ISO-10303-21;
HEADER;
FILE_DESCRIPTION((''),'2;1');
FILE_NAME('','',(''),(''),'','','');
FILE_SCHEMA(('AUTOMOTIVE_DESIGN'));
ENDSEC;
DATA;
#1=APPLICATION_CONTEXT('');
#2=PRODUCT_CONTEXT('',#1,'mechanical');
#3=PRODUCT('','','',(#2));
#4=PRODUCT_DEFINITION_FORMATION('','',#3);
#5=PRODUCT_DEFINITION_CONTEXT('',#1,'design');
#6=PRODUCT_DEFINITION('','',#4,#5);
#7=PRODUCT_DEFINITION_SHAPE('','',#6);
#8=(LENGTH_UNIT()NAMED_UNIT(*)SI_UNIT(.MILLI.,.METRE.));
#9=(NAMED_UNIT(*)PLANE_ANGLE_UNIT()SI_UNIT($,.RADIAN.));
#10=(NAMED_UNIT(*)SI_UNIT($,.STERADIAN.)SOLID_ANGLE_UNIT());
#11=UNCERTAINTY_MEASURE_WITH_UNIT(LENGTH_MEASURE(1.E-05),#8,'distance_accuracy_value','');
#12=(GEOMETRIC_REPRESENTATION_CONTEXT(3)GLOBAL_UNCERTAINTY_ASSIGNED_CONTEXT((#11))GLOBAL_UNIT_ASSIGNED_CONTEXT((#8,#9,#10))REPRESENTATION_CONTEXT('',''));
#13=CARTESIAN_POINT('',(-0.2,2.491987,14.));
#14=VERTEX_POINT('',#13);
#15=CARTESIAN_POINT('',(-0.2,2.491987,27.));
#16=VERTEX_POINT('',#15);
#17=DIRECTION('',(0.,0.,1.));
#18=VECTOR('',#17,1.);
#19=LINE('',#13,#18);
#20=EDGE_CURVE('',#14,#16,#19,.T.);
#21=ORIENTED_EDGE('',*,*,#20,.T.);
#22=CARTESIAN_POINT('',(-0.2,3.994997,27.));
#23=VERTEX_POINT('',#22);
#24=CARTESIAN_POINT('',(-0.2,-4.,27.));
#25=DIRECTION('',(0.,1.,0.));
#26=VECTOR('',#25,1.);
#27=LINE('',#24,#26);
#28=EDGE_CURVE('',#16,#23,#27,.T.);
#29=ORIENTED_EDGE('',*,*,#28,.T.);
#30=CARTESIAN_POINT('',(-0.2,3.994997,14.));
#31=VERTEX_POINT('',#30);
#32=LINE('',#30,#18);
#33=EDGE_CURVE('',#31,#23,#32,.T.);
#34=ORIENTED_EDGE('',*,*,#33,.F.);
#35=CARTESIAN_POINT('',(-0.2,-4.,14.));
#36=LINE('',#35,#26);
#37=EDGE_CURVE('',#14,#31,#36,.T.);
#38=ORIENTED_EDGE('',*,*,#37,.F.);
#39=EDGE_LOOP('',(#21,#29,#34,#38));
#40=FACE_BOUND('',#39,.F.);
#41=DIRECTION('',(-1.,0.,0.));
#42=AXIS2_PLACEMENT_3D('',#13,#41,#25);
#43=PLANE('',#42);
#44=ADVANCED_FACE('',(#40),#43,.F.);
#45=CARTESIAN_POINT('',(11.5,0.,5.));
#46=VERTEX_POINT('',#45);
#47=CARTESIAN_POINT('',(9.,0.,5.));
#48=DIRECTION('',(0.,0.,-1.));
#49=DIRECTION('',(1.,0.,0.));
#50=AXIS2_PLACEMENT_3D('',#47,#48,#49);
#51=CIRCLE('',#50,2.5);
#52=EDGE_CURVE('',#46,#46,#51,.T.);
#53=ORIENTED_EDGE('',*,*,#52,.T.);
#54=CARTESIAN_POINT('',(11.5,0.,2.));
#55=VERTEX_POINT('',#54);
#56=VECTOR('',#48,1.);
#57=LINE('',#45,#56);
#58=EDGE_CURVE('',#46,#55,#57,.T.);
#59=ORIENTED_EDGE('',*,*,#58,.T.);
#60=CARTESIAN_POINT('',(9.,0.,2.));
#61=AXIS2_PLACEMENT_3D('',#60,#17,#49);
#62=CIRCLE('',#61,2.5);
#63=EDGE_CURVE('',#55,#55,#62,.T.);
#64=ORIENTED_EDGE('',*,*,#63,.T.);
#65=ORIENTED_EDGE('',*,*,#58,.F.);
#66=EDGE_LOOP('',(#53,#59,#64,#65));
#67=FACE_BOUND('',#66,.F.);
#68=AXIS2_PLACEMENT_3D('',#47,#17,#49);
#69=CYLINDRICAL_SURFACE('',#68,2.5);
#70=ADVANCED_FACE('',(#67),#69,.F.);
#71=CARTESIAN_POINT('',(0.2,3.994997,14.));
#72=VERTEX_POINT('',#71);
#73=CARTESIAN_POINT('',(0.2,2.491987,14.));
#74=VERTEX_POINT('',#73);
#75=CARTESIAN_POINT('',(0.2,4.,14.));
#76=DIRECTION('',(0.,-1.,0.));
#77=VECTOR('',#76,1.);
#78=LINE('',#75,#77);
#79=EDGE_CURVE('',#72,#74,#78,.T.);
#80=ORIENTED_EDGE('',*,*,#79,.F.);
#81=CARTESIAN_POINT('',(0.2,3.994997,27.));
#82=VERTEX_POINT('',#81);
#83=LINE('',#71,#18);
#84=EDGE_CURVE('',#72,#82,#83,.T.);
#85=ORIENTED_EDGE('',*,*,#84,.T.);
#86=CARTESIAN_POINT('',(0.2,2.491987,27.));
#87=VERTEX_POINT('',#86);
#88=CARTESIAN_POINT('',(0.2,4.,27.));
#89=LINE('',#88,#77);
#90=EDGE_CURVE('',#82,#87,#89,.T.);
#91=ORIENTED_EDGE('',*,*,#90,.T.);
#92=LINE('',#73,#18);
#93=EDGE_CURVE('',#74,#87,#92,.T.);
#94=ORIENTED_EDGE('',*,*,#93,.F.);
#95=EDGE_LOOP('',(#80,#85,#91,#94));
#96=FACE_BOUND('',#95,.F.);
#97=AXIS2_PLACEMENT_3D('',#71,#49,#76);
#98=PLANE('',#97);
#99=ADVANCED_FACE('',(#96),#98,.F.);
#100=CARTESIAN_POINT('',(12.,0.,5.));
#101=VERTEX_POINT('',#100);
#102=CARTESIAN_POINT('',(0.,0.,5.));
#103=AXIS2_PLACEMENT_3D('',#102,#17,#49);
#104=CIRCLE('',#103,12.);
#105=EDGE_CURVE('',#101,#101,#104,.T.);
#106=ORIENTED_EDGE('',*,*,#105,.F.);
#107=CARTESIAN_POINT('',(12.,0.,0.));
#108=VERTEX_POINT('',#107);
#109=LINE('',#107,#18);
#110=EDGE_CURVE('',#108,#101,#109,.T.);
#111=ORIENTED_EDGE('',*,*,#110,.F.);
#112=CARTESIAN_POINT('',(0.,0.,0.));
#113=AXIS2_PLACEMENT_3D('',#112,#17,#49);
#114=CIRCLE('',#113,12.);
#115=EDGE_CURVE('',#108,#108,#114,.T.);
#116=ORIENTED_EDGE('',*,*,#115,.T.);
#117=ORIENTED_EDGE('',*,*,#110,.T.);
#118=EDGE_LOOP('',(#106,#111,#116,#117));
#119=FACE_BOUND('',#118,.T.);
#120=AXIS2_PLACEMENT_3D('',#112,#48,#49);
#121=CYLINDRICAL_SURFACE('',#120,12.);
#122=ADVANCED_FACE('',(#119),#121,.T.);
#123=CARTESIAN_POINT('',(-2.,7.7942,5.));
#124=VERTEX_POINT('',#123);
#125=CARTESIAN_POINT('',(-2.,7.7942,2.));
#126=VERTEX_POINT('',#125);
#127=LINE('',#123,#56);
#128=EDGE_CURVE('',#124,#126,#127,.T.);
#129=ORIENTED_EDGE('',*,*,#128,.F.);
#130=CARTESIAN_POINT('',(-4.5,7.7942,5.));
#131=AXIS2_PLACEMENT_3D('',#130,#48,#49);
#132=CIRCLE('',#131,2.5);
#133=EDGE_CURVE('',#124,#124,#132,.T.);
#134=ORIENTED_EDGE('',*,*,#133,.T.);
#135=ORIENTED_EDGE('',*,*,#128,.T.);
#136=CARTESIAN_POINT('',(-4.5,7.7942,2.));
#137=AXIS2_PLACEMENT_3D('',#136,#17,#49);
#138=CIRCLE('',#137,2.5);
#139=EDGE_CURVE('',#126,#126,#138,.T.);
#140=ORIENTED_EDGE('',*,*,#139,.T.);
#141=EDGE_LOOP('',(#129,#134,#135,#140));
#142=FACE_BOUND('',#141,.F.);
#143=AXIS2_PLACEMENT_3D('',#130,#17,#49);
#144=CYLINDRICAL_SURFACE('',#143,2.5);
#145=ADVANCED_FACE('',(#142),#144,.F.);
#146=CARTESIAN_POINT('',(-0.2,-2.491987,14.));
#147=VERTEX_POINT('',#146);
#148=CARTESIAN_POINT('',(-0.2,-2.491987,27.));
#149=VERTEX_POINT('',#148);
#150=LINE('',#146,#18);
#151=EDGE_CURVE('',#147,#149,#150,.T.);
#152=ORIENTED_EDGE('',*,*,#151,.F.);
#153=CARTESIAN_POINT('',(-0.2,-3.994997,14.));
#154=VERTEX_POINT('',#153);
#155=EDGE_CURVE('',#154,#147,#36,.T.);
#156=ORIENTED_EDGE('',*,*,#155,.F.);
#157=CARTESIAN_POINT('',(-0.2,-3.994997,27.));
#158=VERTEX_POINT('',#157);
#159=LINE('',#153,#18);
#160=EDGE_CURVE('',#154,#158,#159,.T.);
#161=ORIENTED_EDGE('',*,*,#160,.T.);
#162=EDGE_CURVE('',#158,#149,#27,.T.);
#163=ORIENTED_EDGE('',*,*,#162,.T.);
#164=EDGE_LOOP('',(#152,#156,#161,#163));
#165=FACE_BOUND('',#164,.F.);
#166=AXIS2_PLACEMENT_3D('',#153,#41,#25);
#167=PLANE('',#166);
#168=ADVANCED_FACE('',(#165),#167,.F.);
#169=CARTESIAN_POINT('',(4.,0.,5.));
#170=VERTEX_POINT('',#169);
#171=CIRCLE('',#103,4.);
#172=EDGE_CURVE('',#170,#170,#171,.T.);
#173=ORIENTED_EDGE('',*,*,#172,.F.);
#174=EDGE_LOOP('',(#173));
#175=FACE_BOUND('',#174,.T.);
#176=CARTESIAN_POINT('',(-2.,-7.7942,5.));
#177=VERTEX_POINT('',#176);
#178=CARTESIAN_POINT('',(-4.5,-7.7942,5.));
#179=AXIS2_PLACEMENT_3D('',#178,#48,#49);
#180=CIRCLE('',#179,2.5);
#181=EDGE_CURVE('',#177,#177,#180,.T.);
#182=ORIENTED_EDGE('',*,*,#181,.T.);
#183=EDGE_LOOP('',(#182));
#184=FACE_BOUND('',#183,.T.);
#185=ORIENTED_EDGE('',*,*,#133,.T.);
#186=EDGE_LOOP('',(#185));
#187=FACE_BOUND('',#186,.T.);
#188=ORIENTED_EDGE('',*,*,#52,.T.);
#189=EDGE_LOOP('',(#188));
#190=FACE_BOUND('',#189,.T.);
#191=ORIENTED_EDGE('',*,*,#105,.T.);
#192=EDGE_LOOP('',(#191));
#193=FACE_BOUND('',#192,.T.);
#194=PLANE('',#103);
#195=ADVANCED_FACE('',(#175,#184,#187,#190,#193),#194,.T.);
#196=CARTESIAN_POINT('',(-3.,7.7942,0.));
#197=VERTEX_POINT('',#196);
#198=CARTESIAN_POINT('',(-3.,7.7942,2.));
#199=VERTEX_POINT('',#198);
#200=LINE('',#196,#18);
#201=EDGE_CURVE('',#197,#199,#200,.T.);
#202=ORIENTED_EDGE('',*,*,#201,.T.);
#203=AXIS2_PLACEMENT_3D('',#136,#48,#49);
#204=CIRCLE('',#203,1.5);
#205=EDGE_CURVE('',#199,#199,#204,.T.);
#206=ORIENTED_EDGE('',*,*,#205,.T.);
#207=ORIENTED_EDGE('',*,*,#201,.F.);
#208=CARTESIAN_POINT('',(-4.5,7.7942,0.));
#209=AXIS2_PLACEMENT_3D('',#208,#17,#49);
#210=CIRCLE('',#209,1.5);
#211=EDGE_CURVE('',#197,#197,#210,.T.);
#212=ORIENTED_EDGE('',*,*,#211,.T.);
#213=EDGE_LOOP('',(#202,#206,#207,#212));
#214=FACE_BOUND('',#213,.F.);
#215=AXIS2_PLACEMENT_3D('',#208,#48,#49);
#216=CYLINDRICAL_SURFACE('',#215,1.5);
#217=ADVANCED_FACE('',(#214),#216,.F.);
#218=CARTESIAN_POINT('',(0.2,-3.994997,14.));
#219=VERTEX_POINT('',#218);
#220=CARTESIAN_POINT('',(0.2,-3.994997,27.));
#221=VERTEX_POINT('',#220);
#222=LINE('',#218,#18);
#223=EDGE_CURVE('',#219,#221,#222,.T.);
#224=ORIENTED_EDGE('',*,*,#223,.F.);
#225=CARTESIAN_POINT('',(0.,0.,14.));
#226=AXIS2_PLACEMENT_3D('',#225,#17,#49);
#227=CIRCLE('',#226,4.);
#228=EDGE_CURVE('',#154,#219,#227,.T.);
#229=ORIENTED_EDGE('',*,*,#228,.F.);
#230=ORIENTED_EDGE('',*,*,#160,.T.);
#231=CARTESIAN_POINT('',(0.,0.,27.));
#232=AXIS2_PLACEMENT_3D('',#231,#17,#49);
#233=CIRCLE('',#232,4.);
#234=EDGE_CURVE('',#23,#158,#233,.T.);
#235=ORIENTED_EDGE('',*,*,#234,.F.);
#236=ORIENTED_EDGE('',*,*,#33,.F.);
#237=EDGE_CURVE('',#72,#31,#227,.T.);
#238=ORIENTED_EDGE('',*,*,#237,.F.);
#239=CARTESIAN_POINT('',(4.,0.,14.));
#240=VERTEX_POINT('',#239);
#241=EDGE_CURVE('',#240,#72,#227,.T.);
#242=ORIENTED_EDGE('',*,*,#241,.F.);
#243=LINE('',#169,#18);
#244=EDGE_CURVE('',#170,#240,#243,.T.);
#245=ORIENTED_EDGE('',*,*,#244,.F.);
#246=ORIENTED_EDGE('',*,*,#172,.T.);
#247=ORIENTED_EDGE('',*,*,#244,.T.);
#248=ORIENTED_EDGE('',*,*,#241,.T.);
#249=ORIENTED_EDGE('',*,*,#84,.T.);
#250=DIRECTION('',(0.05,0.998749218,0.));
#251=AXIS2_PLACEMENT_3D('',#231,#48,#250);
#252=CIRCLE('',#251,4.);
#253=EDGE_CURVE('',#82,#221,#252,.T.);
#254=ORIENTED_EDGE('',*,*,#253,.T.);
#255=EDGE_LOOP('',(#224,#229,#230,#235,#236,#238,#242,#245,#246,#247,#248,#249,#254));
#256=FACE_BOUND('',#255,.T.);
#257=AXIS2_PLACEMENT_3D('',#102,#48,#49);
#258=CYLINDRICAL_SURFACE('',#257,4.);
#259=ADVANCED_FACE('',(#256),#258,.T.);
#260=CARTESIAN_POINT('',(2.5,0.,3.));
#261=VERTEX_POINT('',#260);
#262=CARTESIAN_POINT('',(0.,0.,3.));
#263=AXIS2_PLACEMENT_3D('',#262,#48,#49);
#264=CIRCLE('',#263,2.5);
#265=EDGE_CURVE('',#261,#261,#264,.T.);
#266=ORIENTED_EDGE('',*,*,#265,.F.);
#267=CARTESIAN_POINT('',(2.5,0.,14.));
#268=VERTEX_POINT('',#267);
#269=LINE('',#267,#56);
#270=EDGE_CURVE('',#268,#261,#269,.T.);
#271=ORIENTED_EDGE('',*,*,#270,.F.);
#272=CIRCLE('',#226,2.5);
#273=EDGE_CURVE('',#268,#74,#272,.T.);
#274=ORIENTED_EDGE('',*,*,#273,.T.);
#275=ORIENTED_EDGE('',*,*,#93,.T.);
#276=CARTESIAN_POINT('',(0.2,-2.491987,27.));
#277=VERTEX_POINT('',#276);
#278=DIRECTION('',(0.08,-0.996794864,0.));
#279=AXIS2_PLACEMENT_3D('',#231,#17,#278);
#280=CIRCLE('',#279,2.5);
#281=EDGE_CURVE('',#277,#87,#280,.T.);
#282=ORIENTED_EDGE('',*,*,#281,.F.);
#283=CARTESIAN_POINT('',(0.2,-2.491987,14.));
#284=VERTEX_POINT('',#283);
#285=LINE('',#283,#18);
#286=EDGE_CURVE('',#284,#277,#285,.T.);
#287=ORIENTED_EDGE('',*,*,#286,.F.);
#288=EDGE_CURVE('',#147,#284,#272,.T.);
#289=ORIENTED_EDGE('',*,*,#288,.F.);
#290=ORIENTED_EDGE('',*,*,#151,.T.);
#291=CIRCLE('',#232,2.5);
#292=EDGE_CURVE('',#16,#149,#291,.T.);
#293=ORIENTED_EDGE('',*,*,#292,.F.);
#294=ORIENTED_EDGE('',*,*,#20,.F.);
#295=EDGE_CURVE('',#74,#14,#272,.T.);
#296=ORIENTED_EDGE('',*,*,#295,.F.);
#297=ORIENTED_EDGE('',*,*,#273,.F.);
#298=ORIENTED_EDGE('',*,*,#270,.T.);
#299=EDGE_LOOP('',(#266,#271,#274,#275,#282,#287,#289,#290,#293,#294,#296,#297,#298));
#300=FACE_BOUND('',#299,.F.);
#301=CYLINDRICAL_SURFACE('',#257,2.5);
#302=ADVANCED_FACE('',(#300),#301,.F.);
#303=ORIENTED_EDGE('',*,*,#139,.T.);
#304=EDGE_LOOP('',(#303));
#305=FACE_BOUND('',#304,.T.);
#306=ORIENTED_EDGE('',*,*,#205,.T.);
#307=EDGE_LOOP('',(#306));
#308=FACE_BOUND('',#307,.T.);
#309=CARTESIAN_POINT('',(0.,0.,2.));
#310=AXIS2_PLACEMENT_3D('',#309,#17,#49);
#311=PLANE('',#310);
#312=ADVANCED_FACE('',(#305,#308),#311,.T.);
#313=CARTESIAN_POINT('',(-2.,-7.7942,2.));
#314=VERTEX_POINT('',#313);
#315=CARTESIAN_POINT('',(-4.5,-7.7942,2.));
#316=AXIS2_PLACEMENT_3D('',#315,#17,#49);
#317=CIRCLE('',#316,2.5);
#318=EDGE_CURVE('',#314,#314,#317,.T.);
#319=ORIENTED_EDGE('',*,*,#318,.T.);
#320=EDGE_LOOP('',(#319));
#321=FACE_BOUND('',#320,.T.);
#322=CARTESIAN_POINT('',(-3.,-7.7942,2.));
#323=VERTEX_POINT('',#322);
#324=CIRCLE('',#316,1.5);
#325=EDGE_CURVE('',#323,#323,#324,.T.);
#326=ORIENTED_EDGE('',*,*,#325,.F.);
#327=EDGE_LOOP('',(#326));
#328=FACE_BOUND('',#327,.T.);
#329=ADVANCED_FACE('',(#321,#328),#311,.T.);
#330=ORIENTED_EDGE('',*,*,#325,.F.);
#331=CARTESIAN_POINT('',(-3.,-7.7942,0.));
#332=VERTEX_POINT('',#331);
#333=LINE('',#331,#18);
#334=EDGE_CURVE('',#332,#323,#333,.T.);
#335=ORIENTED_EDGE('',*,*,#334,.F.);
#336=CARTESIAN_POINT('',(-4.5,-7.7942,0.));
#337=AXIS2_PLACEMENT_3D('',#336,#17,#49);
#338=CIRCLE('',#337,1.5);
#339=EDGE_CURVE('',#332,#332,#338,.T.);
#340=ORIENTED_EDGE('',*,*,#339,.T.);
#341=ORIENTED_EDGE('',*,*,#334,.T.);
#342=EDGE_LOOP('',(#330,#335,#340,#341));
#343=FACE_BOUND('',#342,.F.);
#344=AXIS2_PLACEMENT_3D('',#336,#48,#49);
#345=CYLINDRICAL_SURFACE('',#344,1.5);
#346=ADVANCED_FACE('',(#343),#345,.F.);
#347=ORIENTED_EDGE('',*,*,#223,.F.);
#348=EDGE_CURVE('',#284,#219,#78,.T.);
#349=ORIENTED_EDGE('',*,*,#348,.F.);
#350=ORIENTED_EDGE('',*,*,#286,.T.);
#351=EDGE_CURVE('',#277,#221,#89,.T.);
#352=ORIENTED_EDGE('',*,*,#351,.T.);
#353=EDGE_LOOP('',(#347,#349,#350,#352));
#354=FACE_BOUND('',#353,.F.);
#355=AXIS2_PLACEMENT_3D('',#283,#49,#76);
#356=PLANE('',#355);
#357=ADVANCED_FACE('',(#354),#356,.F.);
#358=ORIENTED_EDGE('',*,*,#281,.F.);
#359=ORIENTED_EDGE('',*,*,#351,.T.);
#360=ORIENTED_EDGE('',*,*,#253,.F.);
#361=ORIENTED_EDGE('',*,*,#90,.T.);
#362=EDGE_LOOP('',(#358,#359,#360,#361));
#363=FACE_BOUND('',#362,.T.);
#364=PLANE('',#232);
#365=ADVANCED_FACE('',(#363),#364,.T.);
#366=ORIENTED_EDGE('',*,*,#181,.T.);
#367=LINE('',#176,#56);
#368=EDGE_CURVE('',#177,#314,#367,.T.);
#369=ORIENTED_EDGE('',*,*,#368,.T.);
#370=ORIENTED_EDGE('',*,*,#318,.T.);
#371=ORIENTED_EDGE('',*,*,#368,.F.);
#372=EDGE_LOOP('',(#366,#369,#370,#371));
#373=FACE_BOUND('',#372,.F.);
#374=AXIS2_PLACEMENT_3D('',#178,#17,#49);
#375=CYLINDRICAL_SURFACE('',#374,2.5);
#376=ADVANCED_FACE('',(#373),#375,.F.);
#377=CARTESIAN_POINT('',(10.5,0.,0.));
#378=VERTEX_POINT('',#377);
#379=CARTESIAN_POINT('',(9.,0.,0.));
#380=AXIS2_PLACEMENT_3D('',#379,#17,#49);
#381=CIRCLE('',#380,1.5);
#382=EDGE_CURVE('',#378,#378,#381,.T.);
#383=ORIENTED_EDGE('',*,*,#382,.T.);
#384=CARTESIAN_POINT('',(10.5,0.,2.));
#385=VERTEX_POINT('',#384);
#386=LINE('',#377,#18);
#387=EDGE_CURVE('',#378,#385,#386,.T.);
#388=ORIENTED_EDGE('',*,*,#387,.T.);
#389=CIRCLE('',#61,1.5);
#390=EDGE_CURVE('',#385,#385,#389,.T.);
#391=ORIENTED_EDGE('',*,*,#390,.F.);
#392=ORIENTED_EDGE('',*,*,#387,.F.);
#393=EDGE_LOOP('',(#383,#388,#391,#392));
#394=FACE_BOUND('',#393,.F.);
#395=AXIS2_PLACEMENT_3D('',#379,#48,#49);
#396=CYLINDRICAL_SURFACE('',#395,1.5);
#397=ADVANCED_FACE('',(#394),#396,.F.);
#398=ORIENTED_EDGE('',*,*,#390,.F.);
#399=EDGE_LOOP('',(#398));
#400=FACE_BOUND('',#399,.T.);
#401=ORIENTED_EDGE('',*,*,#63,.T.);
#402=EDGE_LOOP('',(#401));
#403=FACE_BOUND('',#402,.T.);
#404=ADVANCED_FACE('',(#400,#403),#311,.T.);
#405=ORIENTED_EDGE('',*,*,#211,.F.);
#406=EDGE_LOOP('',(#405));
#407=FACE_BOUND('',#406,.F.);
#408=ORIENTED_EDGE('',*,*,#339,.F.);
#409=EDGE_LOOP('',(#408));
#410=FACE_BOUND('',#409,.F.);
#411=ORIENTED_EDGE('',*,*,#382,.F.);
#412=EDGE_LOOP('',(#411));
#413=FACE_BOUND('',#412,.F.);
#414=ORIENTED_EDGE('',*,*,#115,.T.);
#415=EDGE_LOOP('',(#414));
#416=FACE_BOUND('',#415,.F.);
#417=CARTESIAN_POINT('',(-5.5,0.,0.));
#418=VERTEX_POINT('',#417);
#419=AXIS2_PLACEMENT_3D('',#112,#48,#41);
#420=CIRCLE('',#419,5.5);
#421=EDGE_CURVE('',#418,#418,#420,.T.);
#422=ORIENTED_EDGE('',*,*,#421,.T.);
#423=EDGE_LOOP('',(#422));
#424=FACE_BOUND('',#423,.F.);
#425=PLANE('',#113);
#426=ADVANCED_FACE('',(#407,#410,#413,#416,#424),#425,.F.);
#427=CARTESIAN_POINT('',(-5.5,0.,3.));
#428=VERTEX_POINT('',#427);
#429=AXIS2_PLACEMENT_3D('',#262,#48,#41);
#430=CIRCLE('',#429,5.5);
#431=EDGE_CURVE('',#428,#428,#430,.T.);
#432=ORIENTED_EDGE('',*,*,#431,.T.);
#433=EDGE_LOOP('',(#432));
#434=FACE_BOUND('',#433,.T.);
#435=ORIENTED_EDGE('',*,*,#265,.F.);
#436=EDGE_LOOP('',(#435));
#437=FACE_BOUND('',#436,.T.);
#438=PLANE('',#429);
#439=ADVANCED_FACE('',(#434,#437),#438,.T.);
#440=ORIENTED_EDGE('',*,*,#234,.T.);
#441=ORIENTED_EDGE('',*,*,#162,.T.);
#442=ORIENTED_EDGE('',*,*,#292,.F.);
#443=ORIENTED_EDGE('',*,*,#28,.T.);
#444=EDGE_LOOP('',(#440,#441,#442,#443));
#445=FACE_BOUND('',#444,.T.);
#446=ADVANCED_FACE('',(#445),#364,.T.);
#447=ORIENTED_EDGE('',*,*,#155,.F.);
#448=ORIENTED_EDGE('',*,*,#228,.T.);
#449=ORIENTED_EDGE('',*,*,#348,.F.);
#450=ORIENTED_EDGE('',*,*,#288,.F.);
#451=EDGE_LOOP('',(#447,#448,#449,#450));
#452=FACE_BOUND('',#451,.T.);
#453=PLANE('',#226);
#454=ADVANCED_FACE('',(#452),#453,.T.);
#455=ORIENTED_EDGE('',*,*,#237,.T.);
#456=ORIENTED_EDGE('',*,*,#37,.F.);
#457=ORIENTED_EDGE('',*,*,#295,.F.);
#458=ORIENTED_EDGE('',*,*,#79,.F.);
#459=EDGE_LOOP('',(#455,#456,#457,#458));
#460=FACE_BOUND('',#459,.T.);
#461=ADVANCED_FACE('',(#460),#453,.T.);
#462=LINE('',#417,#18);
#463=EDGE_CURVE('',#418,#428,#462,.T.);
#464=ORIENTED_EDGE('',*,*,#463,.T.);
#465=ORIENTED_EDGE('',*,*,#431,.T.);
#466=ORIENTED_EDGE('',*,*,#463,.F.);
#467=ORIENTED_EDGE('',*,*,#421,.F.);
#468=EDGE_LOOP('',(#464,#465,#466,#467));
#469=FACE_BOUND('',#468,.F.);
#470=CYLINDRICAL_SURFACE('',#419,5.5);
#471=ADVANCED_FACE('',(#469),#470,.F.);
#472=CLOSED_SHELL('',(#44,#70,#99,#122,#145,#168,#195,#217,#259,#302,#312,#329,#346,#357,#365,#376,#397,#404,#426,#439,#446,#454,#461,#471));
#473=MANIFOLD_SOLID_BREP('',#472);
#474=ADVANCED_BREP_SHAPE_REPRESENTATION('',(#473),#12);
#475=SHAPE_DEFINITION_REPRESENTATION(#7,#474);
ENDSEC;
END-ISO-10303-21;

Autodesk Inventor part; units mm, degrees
ref_plane "YZ Plane" through (0, 0, 0) normal (1, 0, 0) x (0, 1, 0)
ref_plane "XZ Plane" through (0, 0, 0) normal (0, 1, 0) x (-1, 0, 0)
ref_plane "XY Plane" through (0, 0, 0) normal (0, 0, 1) x (1, 0, 0)
sketch "Sketch1" plane through (0, 0, 0) normal (0, 0, 1) x (1, 0, 0)
  circle A0 centre (0, 0) radius 12
  circle A1 centre (0, 0) radius 9 construction
  circle A2 centre (9, 0) radius 1.5
  circle A3 centre (-4.5, -7.7942) radius 1.5
  circle A4 centre (-4.5, 7.7942) radius 1.5
  line L0 (9, 0) -> (-4.5, -7.7942) construction
  line L1 (-4.5, 7.7942) -> (-4.5, -7.7942) construction
  line L2 (9, 0) -> (-4.5, 7.7942) construction
  circle A5 centre (0, 0) radius 2.5
  dimension "d0" = 24
  dimension "d1" = 18
  dimension "d2" = 3
  dimension "d3" = 5
extrude "Extrusion1" add sketch "Sketch1" along normal blind 5
sketch "Sketch2" plane through (0, 0, 5) normal (0, 0, 1) x (1, 0, 0)
  circle A0 centre (9, 0) radius 2.5
  circle A1 centre (-4.5, 7.7942) radius 2.5
  circle A2 centre (-4.5, -7.7942) radius 2.5
  circle A3 centre (9, 0) radius 1.5 projected
  circle A4 centre (-4.5, -7.7942) radius 1.5 projected
  circle A5 centre (-4.5, 7.7942) radius 1.5 projected
  circle A6 centre (0, 0) radius 4
  circle A7 centre (0, 0) radius 2.5 projected
  circle A8 centre (0, 0) radius 6.5
  dimension "d6" = 5
  dimension "d7" = 8
  dimension "d12" = 13
extrude "Extrusion2" cut sketch "Sketch2" against normal blind 3 contours A0 | A2 | A1 | A5
extrude "Extrusion3" add sketch "Sketch2" along normal blind 9 contours A6
sketch "Sketch3" plane through (0, 0, 0) normal (0, 0, -1) x (-1, 0, 0)
  circle A0 centre (0, 0) radius 12 projected
  circle A1 centre (0, 0) radius 5.5
  dimension "d13" = 11
extrude "Extrusion4" cut sketch "Sketch3" against normal blind 3 contours A1
sketch "Sketch4" plane through (0, 0, 14) normal (0, 0, 1) x (1, 0, 0)
  circle A0 centre (0, 0) radius 4 projected
  circle A1 centre (0, 0) radius 2.5 projected
  line L0 (-0.2, -4) -> (-0.2, 4)
  line L1 (-0.2, 4) -> (0.2, 4)
  line L2 (0.2, 4) -> (0.2, -4)
  line L3 (0.2, -4) -> (-0.2, -4)
  point P0 (0, -4)
  point P1 (0, 4)
  point P2 (0.2, -2.492)
  point P3 (0.2, -3.995)
  point P4 (0.2, 3.995)
  point P5 (0.2, 2.492)
  point P6 (-0.2, 2.492)
  point P7 (-0.2, 3.995)
  point P8 (-0.2, -3.995)
  point P9 (-0.2, -2.492)
  dimension "d16" = 0.4
extrude "Extrusion5" add sketch "Sketch4" along normal blind 13 contours A0 L2 A1 | L0 A1 A0
properties part number "Bearing_Mount"
